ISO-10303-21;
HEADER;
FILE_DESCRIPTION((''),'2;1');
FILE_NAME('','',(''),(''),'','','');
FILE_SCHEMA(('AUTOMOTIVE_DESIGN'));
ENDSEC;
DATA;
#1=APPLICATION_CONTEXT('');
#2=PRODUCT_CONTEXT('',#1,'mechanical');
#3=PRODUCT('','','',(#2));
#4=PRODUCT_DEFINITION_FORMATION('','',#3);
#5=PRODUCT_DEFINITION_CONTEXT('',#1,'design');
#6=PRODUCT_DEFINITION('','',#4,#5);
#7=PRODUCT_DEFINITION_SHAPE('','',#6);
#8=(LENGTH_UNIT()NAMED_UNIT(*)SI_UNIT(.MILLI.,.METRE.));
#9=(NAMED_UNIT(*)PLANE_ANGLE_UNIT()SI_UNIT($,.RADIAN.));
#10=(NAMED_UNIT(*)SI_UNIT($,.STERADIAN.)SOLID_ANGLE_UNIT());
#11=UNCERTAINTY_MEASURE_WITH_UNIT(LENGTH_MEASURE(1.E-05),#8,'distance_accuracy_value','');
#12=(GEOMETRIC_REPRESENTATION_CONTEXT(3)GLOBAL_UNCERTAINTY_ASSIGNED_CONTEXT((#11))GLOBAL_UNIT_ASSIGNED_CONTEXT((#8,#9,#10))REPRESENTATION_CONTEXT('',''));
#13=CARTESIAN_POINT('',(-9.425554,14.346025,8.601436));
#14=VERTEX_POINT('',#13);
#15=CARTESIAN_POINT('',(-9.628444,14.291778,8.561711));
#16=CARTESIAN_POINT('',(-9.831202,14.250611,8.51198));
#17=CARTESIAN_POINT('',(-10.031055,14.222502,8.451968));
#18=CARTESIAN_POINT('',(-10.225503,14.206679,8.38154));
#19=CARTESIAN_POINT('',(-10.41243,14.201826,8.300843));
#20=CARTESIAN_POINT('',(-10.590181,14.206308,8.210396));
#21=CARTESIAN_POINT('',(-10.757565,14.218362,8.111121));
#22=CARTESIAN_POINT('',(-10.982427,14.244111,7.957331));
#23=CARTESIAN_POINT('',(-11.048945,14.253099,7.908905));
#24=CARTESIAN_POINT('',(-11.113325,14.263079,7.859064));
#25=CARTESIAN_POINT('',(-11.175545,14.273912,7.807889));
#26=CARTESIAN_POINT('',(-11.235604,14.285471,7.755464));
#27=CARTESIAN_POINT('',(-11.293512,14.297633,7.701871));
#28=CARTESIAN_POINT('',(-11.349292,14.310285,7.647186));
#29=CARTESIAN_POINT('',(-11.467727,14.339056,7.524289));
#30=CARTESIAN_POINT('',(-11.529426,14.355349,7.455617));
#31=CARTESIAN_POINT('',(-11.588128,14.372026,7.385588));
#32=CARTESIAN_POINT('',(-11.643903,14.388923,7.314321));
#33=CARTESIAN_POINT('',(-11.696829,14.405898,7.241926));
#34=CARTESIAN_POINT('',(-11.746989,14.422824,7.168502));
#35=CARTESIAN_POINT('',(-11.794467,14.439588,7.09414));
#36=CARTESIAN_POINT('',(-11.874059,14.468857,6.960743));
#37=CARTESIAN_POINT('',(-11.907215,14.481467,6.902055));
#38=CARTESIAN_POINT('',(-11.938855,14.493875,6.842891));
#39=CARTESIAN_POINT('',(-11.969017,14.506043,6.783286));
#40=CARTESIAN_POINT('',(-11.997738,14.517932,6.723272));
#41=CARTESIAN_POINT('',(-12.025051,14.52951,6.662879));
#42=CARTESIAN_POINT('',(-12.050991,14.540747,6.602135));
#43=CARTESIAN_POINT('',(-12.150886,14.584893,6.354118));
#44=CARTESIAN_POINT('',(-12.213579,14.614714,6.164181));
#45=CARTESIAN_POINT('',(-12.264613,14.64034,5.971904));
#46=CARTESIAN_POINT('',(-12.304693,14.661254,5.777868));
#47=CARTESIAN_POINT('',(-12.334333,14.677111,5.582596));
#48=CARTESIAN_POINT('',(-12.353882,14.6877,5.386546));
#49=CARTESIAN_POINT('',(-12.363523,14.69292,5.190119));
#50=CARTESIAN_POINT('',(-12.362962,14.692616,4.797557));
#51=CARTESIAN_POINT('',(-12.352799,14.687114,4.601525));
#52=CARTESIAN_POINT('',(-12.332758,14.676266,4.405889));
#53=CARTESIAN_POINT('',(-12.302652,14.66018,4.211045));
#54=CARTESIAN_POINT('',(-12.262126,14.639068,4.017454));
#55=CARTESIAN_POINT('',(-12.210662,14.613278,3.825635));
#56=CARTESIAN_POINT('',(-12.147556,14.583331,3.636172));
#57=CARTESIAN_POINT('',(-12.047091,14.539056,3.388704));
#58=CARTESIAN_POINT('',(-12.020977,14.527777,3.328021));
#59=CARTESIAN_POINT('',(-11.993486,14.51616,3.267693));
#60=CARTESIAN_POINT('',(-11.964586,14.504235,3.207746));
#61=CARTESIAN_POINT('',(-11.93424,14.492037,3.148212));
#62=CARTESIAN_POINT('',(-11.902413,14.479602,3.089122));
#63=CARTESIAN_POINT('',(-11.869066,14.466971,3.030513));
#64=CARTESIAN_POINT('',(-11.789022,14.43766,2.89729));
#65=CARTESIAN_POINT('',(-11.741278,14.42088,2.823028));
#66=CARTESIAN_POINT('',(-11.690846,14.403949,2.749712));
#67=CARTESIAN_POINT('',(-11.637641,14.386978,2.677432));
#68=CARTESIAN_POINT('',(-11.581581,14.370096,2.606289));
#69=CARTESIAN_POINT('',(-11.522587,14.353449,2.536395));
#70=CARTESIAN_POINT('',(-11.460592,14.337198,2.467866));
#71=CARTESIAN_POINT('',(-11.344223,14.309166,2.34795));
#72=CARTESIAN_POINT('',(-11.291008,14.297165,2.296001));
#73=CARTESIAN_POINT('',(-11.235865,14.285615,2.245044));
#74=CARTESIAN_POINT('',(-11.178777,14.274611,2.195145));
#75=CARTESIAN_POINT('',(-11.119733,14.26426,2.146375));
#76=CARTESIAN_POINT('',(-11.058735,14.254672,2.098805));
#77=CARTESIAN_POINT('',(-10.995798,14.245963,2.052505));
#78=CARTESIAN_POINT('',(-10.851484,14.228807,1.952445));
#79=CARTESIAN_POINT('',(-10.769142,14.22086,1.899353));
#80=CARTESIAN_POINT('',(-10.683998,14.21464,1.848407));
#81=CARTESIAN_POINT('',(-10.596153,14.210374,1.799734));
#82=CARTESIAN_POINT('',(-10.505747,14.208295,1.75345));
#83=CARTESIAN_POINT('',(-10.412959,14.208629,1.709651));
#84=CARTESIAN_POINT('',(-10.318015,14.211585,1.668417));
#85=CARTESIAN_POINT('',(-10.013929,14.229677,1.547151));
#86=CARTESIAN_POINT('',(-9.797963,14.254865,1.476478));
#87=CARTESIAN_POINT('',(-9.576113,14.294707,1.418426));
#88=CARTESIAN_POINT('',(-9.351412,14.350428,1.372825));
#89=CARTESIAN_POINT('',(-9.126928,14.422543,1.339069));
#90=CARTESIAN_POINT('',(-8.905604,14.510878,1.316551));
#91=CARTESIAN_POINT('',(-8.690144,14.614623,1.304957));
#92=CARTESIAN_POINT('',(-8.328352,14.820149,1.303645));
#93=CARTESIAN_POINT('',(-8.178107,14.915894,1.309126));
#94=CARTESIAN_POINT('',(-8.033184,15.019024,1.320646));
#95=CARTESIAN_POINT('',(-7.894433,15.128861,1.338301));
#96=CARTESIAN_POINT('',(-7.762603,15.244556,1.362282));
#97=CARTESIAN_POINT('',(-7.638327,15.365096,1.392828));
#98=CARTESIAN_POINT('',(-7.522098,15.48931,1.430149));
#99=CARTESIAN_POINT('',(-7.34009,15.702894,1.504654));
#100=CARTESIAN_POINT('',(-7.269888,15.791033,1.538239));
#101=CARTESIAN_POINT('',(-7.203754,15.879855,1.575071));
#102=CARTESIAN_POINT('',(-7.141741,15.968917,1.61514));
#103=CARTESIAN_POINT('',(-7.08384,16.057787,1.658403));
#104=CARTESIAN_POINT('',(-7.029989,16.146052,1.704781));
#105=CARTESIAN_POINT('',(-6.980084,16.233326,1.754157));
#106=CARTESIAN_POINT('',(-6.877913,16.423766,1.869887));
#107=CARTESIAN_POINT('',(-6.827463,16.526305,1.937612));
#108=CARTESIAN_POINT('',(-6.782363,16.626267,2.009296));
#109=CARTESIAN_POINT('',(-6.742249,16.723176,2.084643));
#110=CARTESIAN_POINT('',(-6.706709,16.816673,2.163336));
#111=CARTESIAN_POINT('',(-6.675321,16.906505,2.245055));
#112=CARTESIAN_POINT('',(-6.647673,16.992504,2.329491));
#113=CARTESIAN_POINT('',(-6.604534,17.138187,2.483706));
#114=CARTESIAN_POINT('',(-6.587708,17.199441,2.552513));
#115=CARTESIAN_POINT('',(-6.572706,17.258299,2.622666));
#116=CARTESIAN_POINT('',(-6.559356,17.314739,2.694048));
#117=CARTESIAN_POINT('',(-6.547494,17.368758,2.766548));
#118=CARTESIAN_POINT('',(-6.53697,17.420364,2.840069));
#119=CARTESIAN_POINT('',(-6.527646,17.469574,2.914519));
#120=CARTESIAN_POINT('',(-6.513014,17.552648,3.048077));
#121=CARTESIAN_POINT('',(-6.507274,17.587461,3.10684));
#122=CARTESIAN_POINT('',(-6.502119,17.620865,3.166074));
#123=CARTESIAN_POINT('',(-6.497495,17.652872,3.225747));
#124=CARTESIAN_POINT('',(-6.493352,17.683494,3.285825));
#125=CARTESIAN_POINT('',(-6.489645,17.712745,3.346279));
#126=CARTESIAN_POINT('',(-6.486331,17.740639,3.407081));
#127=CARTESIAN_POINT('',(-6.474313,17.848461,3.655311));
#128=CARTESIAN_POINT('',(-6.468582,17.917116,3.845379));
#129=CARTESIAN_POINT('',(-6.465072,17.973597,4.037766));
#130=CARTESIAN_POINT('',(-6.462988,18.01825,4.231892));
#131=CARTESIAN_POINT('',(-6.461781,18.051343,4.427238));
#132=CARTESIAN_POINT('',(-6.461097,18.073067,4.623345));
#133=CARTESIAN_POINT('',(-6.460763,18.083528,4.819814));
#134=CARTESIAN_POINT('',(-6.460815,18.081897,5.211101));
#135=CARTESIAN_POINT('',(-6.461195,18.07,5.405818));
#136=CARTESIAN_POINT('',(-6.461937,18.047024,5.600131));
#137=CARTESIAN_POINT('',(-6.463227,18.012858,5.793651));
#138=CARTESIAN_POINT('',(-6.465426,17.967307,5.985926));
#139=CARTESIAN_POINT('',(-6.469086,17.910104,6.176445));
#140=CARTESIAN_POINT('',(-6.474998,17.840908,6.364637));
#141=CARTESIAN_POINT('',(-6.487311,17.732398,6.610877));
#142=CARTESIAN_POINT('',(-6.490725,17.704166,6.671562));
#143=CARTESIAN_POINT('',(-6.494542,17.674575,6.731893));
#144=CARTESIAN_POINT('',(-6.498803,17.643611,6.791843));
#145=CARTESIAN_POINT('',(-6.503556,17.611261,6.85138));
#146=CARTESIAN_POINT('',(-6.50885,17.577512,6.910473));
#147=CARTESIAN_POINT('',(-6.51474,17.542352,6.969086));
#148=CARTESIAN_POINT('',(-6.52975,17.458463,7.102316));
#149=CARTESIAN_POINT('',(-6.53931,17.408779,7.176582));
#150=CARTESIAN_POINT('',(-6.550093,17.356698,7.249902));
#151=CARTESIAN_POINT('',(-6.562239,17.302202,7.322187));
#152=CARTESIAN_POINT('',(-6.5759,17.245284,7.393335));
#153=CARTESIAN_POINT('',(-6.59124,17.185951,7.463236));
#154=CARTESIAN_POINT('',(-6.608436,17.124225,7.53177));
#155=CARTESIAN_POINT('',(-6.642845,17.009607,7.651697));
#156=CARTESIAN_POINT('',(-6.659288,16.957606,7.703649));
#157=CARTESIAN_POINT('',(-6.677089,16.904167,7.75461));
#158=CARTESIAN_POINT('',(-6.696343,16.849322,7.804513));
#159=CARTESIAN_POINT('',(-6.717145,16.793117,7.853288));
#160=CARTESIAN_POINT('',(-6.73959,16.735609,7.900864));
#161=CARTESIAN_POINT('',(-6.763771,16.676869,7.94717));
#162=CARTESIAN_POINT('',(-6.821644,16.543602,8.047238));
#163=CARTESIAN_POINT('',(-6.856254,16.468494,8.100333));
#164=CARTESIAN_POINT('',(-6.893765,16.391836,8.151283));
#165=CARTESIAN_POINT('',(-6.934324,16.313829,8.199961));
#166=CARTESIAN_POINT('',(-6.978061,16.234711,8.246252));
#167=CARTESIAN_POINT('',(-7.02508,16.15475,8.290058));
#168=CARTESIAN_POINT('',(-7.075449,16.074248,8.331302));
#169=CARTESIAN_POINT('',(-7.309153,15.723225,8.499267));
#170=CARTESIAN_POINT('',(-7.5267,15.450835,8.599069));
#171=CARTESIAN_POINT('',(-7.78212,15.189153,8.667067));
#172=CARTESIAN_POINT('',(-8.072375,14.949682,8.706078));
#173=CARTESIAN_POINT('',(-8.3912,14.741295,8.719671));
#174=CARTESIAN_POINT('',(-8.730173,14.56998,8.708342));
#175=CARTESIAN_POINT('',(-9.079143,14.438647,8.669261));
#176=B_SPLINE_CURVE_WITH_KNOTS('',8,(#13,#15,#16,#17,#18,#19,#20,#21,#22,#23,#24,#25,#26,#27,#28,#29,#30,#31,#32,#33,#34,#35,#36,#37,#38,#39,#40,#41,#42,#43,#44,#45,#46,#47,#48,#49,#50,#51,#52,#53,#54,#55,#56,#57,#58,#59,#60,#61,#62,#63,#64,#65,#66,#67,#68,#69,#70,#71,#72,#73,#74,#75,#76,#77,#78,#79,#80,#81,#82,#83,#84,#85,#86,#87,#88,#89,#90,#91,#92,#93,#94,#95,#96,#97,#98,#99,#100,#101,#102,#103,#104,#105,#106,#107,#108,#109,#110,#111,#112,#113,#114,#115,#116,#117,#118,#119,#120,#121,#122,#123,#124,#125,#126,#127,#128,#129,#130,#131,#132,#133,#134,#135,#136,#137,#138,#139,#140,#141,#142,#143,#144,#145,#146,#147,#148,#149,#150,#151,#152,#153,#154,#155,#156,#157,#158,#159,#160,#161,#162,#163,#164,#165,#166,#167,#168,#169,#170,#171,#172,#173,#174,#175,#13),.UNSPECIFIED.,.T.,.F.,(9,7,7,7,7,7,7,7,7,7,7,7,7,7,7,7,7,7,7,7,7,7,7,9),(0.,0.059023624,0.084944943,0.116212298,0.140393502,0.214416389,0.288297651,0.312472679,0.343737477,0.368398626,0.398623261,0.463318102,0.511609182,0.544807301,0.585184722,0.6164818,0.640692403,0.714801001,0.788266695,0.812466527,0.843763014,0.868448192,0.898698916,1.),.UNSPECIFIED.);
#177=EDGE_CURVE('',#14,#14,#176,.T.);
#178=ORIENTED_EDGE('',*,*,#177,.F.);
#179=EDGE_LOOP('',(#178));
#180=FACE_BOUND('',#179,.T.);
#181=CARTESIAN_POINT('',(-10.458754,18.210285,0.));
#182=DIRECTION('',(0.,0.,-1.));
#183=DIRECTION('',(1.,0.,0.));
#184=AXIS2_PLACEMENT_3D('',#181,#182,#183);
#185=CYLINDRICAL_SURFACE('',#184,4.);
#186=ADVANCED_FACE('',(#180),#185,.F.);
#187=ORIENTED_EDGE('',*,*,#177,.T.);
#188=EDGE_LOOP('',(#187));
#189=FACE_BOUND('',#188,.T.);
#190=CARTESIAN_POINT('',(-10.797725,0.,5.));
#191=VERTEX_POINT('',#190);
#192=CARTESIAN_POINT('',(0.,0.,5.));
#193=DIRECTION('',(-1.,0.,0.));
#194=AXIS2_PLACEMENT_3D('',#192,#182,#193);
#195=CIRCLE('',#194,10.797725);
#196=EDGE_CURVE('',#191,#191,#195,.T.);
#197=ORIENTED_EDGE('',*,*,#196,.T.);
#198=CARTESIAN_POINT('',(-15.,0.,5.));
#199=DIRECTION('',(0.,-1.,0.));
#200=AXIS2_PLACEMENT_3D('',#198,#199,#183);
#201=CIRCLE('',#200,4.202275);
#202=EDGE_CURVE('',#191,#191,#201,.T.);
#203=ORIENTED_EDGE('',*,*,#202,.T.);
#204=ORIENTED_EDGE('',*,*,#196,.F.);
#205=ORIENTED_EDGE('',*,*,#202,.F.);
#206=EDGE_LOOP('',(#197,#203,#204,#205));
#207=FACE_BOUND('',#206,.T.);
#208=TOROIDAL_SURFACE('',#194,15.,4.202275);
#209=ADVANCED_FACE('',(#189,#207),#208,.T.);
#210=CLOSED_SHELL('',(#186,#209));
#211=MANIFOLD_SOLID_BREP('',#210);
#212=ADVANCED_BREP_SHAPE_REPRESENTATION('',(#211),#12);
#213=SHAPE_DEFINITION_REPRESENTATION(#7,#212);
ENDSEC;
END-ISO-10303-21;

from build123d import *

# Parameters (mm, degrees)
F2_R     = 4.2022748897
F4_R     = 4
F5_DEPTH = 25
F6_DEPTH = 25


# Not quite as in the source:
# - the program builds the solid bodies; features that only make, move or delete a surface that nothing else refers to are left out


with BuildPart() as f3:
    # F2 (on Front) → F3 (revolve)
    with BuildSketch(Plane.XZ):
        with Locations((-15, 5)):
            Circle(F2_R)
    revolve(axis=Axis((0, 0, 2.5), (0, 0, -1)))

    # F4 (on Top) → F5 (cut)
    with BuildSketch(Plane.XY):
        with Locations((-10.4587538705, 18.2102846621)):
            Circle(F4_R)
    extrude(amount=F5_DEPTH, mode=Mode.SUBTRACT)

    # F4 (on Top) → F6 (cut)
    with BuildSketch(Plane.XY):
        with Locations((-10.4587538705, 18.2102846621)):
            Circle(F4_R)
    extrude(amount=F6_DEPTH, mode=Mode.SUBTRACT)


solid = f3.part
